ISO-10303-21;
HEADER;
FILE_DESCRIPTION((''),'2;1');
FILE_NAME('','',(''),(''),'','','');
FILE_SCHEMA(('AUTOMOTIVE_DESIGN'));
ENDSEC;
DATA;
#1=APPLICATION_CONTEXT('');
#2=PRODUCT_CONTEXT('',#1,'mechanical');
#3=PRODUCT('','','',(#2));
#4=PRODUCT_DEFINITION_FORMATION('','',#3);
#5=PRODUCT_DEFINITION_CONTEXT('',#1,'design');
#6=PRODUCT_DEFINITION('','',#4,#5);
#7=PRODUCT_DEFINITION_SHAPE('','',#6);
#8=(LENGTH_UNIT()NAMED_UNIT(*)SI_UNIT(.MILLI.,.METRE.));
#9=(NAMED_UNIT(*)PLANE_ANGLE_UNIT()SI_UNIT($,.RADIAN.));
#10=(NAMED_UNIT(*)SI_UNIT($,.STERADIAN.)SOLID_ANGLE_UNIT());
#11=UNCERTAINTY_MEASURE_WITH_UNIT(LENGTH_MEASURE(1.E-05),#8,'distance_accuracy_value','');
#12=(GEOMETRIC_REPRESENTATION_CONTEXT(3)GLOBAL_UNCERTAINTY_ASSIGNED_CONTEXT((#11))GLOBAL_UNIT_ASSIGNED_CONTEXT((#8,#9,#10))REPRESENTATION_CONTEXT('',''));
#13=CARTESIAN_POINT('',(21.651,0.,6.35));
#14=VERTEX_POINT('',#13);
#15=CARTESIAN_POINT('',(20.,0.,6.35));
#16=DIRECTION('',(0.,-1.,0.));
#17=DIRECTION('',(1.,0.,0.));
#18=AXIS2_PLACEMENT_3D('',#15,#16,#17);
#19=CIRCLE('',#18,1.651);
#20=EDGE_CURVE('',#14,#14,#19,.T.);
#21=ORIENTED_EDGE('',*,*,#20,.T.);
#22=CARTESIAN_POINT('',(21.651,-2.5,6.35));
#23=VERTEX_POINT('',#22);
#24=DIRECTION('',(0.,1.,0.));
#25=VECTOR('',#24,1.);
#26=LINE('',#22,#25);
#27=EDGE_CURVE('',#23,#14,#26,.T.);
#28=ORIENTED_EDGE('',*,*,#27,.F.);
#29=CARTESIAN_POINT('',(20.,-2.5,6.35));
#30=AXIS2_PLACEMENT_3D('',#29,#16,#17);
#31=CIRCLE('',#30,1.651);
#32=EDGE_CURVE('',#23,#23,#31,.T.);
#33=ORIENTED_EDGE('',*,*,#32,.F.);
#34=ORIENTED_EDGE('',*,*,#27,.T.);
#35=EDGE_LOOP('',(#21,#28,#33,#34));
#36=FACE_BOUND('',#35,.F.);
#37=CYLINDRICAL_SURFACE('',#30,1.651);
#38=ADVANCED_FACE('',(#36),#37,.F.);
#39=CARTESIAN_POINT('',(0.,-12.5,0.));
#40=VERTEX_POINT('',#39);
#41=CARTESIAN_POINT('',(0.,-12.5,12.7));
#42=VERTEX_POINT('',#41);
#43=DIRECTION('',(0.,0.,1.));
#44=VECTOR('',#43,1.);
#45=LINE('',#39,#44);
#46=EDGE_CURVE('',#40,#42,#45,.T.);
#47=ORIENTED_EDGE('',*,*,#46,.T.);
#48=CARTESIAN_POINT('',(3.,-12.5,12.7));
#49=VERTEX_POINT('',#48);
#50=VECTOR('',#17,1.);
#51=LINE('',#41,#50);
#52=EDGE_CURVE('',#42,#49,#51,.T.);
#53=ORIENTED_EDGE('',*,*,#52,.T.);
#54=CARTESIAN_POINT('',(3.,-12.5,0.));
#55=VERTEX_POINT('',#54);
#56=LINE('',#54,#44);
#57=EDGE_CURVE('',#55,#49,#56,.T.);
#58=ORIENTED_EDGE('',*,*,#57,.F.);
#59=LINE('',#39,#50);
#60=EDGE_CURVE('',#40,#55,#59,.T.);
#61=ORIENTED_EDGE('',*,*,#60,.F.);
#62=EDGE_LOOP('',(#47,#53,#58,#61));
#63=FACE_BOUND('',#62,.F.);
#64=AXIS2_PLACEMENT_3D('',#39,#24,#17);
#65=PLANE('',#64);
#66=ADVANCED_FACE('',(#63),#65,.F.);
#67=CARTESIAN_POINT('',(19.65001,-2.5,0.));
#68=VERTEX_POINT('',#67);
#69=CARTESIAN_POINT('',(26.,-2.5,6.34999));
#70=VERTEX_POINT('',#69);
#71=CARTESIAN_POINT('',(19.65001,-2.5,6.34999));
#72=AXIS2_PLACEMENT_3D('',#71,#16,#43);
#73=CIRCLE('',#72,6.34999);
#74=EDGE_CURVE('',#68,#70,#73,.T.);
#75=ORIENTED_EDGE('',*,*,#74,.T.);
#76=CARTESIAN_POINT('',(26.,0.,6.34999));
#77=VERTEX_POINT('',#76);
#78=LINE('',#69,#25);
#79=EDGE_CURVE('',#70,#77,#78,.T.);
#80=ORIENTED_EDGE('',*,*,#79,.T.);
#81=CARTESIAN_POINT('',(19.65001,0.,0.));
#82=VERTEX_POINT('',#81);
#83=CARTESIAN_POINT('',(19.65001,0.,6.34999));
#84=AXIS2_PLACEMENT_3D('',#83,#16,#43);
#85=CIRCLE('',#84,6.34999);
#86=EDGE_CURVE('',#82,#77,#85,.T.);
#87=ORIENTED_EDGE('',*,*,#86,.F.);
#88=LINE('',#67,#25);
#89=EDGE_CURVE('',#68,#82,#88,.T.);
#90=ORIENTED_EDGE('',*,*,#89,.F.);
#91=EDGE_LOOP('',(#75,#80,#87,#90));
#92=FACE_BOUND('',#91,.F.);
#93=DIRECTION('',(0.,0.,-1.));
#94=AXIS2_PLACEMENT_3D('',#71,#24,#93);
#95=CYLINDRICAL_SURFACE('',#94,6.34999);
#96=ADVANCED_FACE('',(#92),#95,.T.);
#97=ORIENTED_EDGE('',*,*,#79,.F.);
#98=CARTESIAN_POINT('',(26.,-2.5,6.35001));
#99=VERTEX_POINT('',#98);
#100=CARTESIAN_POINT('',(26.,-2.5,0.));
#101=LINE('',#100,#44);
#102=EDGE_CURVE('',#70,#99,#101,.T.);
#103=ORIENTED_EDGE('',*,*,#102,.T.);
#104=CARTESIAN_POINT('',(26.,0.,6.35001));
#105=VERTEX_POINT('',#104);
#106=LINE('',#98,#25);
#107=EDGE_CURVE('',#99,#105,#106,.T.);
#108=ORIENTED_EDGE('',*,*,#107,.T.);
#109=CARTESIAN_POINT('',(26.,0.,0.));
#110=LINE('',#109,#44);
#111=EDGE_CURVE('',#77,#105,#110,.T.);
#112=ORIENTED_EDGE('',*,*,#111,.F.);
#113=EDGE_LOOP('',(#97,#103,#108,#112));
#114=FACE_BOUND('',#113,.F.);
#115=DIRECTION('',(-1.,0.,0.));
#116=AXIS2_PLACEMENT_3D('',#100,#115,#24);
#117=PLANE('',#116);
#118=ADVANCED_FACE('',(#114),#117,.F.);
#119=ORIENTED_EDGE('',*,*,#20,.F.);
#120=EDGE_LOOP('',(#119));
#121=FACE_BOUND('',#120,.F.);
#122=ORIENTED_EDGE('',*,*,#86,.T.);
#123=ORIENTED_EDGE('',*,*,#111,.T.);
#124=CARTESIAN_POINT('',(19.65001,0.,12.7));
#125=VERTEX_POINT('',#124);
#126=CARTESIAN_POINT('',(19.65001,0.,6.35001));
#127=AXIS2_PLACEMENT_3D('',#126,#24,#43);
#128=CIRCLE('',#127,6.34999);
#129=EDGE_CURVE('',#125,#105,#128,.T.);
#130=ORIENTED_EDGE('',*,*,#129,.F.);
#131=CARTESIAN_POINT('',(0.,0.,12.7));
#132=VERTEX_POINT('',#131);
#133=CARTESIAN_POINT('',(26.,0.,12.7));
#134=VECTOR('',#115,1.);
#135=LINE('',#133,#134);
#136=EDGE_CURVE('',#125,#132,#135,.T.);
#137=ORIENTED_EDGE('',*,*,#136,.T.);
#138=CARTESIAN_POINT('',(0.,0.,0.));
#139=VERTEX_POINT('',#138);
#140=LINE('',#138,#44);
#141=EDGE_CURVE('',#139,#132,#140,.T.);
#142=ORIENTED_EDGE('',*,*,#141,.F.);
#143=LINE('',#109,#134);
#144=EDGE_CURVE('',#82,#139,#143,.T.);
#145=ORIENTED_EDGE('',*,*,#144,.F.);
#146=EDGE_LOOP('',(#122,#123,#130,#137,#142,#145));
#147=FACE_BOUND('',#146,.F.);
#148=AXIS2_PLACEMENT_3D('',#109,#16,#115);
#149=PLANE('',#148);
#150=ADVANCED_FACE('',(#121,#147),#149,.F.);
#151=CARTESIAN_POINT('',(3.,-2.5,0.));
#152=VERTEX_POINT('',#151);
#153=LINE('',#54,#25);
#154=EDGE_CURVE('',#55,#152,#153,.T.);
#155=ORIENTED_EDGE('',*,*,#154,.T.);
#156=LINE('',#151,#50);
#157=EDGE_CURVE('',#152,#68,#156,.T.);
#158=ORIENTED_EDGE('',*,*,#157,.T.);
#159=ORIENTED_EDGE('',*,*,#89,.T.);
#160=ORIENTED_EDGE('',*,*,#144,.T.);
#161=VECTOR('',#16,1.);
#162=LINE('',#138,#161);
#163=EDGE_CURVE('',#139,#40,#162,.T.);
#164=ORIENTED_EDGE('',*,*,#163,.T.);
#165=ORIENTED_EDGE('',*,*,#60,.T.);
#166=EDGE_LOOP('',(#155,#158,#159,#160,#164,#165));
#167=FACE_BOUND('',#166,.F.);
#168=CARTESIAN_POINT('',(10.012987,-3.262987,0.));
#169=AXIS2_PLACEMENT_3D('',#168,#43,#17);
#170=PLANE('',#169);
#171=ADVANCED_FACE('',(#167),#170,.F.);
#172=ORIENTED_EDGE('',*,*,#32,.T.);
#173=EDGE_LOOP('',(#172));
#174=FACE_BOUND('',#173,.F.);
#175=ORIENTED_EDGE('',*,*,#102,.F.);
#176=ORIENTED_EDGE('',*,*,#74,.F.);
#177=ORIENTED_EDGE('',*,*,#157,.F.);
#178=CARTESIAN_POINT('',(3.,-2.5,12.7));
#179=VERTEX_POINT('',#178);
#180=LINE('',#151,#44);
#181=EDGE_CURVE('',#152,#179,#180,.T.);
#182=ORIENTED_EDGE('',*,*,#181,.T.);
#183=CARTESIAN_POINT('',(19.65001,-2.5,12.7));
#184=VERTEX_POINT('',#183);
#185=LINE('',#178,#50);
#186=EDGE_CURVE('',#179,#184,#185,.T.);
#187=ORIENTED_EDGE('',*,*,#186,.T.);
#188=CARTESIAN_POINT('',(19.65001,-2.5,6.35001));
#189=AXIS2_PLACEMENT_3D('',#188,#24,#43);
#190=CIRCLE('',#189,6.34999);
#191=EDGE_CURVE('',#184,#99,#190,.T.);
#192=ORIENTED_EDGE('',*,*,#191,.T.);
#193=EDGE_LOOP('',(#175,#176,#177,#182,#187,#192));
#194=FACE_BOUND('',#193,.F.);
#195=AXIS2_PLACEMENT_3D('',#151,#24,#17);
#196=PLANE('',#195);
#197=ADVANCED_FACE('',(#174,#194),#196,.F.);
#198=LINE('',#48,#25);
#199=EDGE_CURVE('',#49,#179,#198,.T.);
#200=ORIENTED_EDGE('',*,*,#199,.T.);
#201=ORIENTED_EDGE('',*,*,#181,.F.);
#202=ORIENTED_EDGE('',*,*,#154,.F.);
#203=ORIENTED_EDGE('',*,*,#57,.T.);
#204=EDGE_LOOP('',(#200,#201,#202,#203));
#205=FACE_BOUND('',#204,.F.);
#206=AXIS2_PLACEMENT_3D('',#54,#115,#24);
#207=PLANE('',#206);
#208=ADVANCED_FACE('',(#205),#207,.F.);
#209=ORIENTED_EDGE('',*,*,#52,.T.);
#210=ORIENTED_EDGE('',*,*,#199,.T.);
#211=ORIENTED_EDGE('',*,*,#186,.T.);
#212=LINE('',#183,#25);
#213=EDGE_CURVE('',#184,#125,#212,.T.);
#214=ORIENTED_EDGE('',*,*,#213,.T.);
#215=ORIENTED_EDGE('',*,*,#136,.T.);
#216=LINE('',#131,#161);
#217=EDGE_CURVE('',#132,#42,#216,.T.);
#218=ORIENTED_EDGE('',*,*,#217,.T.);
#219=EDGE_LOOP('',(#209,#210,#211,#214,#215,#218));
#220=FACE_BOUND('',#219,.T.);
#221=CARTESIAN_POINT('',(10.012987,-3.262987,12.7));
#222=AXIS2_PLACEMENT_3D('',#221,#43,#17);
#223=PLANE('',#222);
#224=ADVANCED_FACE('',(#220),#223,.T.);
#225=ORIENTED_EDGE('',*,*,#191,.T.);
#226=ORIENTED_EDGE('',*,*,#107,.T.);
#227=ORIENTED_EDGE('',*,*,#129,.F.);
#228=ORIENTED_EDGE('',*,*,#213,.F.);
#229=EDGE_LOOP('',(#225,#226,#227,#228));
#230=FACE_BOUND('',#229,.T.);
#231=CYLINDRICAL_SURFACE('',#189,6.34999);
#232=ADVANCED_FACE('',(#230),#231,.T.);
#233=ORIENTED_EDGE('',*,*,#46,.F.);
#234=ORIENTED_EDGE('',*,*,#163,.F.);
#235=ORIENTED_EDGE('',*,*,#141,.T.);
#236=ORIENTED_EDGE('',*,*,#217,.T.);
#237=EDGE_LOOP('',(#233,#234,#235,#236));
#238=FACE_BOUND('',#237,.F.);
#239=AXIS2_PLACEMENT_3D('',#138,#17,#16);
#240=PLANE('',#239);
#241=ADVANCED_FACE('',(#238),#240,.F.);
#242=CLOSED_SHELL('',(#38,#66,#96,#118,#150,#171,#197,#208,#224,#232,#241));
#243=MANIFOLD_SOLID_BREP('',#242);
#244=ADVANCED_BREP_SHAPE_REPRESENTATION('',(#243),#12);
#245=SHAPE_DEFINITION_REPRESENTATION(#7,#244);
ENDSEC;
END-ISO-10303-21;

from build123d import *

# Parameters (mm, degrees)
F1_DEPTH = 12.7
F2_R     = 1.651
F3_DEPTH = 3.175
F4_R     = 6.34999


# Not quite as in the source:
# - a fillet or chamfer is up to 0.001 mm smaller than in the source, because OpenCascade refuses the exact size


with BuildPart() as f1:
    # F0 (on Top) → F1 (new body)
    with BuildSketch(Plane.XY):
        Polygon((0, -12.5), (3, -12.5), (3, -2.5), (26, -2.5), (26, 0), (0, 0), align=None)
    extrude(amount=F1_DEPTH)

    # F2 (on face) → F3 (cut)
    with BuildSketch(Plane.XZ.offset(2.5)):
        with Locations((20, 6.35)):
            Circle(F2_R)
    extrude(amount=-F3_DEPTH, mode=Mode.SUBTRACT)

    # F4 (radius 6.35 in the source; OpenCascade refuses exactly that, so slightly less here)
    f4_edges = [f1.edges().sort_by_distance(p)[0] for p in [
        (26, -1.25, 12.7),
        (26, -1.25, 0),
    ]]
    fillet(f4_edges, radius=F4_R)


solid = f1.part
